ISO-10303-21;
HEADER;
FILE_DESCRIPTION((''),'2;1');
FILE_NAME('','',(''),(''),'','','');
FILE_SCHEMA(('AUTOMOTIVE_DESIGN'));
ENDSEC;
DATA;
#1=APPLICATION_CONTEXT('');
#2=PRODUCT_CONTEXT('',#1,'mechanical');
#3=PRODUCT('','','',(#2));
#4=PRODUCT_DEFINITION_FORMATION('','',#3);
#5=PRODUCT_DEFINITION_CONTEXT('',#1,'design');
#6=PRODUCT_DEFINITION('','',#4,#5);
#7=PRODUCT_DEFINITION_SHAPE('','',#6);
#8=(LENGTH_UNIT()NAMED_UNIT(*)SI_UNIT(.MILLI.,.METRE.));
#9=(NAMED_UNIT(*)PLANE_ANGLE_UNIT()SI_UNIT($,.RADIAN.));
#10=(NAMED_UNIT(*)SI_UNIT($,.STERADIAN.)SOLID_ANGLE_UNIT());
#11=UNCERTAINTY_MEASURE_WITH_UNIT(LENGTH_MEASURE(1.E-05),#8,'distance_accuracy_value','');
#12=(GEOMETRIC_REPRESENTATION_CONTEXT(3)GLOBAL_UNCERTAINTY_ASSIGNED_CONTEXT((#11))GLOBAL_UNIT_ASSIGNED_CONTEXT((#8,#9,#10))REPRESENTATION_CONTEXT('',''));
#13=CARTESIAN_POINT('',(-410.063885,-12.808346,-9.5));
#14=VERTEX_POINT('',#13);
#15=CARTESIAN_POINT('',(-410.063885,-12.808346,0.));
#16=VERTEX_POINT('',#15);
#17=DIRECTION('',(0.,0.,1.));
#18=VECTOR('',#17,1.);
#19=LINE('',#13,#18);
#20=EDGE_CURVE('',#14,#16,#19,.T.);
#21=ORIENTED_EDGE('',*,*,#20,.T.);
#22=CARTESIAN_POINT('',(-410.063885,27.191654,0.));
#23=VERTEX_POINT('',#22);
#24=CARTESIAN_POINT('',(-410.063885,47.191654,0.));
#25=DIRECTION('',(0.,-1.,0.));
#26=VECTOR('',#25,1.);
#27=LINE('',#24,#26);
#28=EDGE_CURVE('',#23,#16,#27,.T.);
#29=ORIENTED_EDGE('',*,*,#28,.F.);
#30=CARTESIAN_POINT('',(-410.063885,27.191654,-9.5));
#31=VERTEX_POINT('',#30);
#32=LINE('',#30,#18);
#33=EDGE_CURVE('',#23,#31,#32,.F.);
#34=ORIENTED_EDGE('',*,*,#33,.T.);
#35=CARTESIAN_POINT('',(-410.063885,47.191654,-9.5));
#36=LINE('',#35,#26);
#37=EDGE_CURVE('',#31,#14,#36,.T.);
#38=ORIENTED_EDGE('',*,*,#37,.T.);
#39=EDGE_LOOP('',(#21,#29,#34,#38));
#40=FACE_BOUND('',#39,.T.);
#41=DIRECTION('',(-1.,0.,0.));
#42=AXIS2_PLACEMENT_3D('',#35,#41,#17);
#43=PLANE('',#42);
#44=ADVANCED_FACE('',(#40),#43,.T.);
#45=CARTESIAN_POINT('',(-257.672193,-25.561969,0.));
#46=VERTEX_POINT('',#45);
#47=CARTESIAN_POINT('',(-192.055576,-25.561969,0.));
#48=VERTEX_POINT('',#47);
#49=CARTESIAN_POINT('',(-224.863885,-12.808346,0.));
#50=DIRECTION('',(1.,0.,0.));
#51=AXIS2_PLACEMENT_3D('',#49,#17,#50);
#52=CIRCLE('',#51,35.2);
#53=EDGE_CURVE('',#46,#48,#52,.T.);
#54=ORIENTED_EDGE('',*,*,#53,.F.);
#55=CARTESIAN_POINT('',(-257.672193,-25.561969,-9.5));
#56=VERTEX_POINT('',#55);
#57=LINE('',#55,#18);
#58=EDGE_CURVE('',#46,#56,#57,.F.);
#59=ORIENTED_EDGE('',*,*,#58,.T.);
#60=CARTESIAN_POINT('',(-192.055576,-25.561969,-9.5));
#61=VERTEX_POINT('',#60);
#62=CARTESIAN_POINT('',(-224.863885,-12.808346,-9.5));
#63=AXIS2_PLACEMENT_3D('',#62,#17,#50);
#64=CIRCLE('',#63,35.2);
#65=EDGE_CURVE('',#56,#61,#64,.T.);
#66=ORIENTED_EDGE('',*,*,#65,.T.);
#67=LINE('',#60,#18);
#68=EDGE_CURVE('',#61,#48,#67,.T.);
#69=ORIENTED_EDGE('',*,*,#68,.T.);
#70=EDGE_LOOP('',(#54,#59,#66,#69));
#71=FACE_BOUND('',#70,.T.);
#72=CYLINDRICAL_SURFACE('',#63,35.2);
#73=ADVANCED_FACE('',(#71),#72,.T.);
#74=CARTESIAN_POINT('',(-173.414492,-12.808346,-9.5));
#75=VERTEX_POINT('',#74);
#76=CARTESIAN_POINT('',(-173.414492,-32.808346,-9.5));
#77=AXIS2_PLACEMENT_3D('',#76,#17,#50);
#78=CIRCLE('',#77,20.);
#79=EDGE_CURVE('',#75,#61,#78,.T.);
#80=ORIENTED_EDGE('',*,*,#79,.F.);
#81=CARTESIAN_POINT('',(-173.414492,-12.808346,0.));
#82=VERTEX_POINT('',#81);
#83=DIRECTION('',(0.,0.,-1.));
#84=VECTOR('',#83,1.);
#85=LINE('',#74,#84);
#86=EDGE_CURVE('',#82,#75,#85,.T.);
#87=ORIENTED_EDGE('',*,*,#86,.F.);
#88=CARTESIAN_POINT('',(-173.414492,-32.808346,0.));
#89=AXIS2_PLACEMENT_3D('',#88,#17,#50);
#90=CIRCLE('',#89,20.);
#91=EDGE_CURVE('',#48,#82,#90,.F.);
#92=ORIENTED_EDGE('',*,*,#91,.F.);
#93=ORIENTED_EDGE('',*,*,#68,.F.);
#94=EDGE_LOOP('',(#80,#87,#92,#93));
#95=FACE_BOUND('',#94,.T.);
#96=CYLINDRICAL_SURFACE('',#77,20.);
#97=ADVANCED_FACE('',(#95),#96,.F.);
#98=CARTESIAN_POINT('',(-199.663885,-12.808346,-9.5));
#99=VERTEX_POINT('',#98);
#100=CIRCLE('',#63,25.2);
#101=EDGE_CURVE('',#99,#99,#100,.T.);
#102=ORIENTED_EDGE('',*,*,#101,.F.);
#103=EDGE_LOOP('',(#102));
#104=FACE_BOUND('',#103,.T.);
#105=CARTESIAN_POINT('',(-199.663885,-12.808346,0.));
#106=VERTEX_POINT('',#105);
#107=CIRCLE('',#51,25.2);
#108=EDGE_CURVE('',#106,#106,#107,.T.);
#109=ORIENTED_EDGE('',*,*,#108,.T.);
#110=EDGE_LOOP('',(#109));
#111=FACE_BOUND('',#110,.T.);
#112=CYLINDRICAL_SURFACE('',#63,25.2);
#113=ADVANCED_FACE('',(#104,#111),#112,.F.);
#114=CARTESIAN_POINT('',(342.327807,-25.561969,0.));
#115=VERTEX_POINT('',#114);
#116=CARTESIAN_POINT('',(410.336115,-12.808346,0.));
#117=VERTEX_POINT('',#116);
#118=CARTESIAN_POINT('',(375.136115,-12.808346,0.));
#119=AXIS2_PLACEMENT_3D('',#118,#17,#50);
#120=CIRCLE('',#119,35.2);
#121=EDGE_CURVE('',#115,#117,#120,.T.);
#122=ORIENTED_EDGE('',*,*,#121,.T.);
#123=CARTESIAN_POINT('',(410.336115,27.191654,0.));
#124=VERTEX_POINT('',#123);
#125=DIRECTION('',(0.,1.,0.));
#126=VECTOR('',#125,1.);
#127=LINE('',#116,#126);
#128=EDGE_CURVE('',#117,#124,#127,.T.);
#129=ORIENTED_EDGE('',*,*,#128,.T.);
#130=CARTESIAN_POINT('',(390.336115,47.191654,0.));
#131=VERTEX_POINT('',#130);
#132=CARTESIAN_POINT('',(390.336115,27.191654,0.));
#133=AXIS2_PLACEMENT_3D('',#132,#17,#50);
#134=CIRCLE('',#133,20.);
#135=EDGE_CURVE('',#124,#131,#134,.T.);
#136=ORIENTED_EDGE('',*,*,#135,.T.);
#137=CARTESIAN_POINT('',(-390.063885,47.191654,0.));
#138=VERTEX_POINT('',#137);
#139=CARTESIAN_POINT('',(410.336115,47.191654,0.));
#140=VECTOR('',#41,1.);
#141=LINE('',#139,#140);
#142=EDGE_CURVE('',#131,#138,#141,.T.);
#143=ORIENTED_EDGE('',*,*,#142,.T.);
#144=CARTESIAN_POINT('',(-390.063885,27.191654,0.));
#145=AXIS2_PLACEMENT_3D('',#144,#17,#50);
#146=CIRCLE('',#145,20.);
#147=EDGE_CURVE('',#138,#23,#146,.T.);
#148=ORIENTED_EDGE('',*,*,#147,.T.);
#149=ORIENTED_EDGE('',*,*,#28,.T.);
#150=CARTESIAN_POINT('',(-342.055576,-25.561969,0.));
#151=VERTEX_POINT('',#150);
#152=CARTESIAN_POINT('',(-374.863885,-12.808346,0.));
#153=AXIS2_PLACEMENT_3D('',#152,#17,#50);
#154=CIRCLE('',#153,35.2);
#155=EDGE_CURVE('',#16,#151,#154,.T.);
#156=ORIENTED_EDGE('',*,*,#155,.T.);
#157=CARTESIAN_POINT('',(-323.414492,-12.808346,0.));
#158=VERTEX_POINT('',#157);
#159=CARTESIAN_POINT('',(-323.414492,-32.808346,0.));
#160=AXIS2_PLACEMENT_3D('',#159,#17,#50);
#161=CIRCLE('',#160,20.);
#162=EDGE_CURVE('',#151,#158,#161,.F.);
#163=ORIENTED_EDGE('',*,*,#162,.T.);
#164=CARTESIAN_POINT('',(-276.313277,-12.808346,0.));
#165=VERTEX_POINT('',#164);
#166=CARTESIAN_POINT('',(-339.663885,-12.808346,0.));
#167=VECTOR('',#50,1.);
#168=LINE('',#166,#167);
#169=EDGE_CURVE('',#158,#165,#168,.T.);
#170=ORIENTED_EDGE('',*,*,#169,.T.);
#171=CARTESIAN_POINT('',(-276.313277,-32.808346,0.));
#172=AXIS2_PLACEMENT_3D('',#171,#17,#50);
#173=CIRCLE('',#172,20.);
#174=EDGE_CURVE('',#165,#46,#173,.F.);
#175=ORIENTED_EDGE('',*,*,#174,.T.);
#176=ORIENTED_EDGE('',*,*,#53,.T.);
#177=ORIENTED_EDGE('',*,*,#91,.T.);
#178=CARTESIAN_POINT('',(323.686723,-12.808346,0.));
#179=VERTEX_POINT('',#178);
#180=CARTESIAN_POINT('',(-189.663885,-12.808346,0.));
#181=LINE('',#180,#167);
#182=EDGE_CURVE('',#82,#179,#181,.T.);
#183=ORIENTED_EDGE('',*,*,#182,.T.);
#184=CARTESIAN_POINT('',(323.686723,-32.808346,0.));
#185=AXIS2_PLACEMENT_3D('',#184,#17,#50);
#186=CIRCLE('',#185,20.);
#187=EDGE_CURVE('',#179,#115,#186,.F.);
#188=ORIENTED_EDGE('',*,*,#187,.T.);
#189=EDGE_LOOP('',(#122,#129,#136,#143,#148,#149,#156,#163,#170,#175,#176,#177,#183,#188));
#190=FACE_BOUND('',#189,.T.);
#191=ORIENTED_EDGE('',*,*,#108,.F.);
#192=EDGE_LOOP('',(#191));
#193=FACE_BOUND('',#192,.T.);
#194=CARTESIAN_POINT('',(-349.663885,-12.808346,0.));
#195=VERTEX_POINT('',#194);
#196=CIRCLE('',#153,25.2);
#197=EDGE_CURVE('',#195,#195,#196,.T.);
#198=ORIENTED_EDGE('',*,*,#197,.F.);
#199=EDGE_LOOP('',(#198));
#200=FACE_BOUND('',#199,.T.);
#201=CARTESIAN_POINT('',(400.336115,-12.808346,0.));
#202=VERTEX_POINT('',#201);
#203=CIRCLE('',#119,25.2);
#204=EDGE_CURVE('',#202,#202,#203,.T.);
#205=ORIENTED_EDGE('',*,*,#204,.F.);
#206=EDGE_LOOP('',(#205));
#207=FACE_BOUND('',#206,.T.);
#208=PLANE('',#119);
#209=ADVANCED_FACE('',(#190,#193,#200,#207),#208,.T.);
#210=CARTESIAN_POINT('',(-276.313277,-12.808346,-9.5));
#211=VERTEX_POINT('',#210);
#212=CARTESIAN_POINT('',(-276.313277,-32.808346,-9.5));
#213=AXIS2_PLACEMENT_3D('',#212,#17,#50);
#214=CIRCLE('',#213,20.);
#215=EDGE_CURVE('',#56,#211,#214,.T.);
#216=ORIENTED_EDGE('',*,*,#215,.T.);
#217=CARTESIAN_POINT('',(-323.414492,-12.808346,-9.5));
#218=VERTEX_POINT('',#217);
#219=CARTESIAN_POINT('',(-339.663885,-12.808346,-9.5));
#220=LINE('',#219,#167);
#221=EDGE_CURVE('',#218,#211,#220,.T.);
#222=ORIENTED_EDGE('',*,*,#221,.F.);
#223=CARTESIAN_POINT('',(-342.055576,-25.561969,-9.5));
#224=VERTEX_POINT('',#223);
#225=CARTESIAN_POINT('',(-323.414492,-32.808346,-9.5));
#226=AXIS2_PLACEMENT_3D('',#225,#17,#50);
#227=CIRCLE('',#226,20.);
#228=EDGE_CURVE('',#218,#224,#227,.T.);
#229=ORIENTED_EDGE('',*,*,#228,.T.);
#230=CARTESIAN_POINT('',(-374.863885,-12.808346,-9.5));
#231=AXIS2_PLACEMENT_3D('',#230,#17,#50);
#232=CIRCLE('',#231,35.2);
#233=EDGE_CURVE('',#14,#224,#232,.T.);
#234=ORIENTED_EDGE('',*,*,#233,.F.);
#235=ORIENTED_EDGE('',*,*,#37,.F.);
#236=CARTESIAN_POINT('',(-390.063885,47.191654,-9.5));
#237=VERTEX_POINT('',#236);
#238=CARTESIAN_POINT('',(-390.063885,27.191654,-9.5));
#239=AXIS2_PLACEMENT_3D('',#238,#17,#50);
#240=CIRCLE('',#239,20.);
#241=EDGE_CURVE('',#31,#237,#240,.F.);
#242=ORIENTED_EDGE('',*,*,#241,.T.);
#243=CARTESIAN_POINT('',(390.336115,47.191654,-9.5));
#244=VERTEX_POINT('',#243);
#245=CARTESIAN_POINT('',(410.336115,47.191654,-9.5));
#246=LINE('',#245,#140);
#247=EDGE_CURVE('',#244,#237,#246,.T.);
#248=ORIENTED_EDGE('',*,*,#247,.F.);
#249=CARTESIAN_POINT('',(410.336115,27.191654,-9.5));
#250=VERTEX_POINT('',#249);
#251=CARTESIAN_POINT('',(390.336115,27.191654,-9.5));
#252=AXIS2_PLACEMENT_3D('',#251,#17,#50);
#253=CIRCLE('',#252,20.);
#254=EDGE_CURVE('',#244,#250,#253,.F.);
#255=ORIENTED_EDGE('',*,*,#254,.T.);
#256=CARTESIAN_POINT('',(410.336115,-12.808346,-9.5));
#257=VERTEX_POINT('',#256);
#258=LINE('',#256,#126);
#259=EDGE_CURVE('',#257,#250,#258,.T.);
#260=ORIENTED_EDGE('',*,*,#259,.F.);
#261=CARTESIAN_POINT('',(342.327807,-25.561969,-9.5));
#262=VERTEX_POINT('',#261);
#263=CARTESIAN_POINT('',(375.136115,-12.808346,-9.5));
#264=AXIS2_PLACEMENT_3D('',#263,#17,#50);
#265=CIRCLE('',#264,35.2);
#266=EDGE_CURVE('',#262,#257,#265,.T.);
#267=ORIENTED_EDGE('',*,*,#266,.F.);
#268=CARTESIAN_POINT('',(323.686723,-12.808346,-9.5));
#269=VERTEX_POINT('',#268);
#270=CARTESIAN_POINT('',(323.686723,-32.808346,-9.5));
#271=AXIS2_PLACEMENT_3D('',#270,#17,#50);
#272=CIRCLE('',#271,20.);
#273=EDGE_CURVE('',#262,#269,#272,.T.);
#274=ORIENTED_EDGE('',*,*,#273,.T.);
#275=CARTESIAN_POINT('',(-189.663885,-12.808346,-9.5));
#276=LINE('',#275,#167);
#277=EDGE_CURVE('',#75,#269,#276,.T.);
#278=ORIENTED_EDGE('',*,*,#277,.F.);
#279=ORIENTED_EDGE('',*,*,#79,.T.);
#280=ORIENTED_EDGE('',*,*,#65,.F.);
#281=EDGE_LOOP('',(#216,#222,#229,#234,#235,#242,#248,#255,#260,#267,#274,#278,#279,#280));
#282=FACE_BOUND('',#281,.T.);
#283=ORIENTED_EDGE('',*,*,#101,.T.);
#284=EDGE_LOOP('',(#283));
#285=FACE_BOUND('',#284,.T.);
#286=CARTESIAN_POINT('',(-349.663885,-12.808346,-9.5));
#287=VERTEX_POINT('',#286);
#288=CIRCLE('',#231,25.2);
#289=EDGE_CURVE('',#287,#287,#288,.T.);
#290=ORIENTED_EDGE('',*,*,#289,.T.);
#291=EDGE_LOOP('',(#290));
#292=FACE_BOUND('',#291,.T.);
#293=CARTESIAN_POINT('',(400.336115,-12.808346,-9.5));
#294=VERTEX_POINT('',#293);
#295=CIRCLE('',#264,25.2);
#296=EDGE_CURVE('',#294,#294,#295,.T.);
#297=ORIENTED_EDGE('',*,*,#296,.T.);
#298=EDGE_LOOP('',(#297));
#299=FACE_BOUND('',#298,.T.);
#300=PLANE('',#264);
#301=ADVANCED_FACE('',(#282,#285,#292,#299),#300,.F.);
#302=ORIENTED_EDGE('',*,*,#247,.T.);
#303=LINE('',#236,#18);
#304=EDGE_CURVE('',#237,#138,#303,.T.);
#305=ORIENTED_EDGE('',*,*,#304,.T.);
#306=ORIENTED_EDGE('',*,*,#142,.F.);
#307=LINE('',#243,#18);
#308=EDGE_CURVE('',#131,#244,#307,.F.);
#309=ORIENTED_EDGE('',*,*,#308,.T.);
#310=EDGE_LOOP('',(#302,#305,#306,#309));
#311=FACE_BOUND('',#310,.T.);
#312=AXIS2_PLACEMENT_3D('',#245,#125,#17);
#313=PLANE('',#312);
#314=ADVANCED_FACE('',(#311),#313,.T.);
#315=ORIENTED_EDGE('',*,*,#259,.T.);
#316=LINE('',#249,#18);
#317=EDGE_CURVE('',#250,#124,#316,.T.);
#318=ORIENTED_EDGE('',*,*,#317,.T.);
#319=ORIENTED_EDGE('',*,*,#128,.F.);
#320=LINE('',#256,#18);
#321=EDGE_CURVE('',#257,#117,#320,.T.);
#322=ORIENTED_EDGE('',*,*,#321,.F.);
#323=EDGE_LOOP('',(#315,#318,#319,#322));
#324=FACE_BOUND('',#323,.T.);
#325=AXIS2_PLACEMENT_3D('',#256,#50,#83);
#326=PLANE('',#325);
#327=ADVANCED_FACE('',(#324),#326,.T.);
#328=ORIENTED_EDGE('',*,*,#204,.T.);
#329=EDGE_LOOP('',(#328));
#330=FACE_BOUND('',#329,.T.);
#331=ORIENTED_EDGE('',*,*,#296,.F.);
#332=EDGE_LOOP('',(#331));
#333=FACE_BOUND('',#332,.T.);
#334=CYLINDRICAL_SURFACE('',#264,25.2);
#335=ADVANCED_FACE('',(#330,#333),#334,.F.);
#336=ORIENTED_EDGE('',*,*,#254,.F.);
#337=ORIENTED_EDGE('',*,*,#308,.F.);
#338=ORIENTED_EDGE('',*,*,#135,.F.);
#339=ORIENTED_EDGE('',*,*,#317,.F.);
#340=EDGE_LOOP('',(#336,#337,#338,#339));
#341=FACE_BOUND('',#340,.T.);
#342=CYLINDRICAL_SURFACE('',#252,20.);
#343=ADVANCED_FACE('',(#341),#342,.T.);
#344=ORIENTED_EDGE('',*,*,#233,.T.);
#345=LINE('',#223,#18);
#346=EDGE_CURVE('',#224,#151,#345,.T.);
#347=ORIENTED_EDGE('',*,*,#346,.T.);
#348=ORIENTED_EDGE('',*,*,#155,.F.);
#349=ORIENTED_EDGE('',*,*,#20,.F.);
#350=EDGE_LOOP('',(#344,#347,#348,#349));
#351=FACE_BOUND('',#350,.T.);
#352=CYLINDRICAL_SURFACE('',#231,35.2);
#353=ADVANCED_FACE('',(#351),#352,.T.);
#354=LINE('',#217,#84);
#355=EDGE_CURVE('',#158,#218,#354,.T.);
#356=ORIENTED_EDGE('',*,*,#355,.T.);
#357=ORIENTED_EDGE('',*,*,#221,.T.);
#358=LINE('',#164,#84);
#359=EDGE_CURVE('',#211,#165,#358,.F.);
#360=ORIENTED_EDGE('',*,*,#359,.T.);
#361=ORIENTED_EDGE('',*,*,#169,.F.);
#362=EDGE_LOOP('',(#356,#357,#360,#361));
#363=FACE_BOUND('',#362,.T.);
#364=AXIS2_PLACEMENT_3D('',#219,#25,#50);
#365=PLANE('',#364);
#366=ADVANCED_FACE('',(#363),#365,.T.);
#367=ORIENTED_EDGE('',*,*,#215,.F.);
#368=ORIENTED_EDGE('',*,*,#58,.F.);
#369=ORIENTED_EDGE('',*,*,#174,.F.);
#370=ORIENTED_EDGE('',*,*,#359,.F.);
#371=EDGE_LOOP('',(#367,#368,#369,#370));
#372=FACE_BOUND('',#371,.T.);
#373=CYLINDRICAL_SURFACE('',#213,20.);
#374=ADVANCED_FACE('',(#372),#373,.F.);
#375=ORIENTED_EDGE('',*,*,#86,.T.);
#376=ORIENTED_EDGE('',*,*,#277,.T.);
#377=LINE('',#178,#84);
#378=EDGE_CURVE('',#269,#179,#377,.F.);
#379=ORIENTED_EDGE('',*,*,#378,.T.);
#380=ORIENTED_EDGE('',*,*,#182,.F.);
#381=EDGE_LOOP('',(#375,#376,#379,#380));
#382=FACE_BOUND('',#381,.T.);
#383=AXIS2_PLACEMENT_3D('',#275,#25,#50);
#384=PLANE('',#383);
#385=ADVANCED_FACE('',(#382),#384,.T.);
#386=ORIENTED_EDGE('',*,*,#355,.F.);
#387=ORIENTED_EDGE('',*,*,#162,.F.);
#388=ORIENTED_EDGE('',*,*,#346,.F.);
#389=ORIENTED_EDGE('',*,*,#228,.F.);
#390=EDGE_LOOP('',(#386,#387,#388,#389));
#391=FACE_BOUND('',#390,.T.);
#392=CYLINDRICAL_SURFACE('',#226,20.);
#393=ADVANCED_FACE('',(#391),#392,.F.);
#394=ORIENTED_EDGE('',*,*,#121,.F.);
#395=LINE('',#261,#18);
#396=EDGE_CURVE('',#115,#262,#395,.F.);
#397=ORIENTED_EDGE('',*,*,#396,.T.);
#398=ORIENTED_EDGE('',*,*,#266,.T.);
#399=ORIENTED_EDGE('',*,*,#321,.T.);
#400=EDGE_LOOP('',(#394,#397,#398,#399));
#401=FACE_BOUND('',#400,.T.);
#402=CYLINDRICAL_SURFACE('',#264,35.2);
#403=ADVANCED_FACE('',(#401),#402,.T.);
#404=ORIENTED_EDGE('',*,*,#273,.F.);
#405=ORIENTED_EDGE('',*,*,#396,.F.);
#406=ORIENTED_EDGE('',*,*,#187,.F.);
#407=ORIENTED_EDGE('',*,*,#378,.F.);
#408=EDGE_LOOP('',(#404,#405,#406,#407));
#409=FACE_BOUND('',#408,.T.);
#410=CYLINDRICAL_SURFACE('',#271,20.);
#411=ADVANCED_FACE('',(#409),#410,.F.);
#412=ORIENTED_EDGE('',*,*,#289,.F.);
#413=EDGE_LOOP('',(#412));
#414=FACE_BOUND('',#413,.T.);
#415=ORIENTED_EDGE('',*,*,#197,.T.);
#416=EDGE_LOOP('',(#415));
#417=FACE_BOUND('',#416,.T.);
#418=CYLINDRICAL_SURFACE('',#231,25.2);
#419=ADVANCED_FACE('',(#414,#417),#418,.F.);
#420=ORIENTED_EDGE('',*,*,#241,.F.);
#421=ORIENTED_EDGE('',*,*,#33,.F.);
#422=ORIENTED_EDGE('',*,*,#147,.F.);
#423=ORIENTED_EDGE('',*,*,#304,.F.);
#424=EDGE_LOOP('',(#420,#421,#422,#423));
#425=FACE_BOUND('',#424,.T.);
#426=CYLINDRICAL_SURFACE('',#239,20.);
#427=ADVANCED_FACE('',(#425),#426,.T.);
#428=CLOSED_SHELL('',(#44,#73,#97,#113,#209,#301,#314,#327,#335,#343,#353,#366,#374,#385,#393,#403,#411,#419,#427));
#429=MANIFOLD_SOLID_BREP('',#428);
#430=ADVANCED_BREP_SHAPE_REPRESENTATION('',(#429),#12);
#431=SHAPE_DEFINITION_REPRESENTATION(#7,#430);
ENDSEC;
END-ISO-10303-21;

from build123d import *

# Parameters (mm, degrees)
ESBO_O2_R          = 25.2
FLANGE_BASE1_DEPTH = 9.5
FILETE1_R          = 20


# Sheet-metal steps are written as plain solids
with BuildPart() as part:
    # Esboço2 → Flange-base1 (new body)
    with BuildSketch(Plane.XY):
        with BuildLine():
            Line((410.336115278, -12.808345835), (410.336115278, 47.191654165))
            Line((410.336115278, 47.191654165), (-410.063884722, 47.191654165))
            Line((-410.063884722, 47.191654165), (-410.063884722, -12.808345835))
            ThreePointArc((-410.063884722, -12.808345835), (-374.863884722, -48.008345835), (-339.663884722, -12.808345835))
            Line((-339.663884722, -12.808345835), (-260.063884722, -12.808345835))
            ThreePointArc((-260.063884722, -12.808345835), (-224.863884722, -48.008345835), (-189.663884722, -12.808345835))
            Line((-189.663884722, -12.808345835), (339.936115278, -12.808345835))
            ThreePointArc((339.936115278, -12.808345835), (375.136115278, -48.008345835), (410.336115278, -12.808345835))
        make_face()
        with Locations((375.136115278, -12.808345835)):
            Circle(ESBO_O2_R, mode=Mode.SUBTRACT)
        with Locations((-224.863884722, -12.808345835)):
            Circle(ESBO_O2_R, mode=Mode.SUBTRACT)
        with Locations((-374.863884722, -12.808345835)):
            Circle(ESBO_O2_R, mode=Mode.SUBTRACT)
    extrude(amount=-FLANGE_BASE1_DEPTH)

    # Filete1
    filete1_edges = [part.edges().sort_by_distance(p)[0] for p in [
        (339.936115278, -12.808345835, -4.75),
        (-189.663884722, -12.808345835, -4.75),
        (-260.063884722, -12.808345835, -4.75),
        (-339.663884722, -12.808345835, -4.75),
        (-410.063884722, 47.191654165, -4.75),
        (410.336115278, 47.191654165, -4.75),
    ]]
    fillet(filete1_edges, radius=FILETE1_R)


solid = part.part
